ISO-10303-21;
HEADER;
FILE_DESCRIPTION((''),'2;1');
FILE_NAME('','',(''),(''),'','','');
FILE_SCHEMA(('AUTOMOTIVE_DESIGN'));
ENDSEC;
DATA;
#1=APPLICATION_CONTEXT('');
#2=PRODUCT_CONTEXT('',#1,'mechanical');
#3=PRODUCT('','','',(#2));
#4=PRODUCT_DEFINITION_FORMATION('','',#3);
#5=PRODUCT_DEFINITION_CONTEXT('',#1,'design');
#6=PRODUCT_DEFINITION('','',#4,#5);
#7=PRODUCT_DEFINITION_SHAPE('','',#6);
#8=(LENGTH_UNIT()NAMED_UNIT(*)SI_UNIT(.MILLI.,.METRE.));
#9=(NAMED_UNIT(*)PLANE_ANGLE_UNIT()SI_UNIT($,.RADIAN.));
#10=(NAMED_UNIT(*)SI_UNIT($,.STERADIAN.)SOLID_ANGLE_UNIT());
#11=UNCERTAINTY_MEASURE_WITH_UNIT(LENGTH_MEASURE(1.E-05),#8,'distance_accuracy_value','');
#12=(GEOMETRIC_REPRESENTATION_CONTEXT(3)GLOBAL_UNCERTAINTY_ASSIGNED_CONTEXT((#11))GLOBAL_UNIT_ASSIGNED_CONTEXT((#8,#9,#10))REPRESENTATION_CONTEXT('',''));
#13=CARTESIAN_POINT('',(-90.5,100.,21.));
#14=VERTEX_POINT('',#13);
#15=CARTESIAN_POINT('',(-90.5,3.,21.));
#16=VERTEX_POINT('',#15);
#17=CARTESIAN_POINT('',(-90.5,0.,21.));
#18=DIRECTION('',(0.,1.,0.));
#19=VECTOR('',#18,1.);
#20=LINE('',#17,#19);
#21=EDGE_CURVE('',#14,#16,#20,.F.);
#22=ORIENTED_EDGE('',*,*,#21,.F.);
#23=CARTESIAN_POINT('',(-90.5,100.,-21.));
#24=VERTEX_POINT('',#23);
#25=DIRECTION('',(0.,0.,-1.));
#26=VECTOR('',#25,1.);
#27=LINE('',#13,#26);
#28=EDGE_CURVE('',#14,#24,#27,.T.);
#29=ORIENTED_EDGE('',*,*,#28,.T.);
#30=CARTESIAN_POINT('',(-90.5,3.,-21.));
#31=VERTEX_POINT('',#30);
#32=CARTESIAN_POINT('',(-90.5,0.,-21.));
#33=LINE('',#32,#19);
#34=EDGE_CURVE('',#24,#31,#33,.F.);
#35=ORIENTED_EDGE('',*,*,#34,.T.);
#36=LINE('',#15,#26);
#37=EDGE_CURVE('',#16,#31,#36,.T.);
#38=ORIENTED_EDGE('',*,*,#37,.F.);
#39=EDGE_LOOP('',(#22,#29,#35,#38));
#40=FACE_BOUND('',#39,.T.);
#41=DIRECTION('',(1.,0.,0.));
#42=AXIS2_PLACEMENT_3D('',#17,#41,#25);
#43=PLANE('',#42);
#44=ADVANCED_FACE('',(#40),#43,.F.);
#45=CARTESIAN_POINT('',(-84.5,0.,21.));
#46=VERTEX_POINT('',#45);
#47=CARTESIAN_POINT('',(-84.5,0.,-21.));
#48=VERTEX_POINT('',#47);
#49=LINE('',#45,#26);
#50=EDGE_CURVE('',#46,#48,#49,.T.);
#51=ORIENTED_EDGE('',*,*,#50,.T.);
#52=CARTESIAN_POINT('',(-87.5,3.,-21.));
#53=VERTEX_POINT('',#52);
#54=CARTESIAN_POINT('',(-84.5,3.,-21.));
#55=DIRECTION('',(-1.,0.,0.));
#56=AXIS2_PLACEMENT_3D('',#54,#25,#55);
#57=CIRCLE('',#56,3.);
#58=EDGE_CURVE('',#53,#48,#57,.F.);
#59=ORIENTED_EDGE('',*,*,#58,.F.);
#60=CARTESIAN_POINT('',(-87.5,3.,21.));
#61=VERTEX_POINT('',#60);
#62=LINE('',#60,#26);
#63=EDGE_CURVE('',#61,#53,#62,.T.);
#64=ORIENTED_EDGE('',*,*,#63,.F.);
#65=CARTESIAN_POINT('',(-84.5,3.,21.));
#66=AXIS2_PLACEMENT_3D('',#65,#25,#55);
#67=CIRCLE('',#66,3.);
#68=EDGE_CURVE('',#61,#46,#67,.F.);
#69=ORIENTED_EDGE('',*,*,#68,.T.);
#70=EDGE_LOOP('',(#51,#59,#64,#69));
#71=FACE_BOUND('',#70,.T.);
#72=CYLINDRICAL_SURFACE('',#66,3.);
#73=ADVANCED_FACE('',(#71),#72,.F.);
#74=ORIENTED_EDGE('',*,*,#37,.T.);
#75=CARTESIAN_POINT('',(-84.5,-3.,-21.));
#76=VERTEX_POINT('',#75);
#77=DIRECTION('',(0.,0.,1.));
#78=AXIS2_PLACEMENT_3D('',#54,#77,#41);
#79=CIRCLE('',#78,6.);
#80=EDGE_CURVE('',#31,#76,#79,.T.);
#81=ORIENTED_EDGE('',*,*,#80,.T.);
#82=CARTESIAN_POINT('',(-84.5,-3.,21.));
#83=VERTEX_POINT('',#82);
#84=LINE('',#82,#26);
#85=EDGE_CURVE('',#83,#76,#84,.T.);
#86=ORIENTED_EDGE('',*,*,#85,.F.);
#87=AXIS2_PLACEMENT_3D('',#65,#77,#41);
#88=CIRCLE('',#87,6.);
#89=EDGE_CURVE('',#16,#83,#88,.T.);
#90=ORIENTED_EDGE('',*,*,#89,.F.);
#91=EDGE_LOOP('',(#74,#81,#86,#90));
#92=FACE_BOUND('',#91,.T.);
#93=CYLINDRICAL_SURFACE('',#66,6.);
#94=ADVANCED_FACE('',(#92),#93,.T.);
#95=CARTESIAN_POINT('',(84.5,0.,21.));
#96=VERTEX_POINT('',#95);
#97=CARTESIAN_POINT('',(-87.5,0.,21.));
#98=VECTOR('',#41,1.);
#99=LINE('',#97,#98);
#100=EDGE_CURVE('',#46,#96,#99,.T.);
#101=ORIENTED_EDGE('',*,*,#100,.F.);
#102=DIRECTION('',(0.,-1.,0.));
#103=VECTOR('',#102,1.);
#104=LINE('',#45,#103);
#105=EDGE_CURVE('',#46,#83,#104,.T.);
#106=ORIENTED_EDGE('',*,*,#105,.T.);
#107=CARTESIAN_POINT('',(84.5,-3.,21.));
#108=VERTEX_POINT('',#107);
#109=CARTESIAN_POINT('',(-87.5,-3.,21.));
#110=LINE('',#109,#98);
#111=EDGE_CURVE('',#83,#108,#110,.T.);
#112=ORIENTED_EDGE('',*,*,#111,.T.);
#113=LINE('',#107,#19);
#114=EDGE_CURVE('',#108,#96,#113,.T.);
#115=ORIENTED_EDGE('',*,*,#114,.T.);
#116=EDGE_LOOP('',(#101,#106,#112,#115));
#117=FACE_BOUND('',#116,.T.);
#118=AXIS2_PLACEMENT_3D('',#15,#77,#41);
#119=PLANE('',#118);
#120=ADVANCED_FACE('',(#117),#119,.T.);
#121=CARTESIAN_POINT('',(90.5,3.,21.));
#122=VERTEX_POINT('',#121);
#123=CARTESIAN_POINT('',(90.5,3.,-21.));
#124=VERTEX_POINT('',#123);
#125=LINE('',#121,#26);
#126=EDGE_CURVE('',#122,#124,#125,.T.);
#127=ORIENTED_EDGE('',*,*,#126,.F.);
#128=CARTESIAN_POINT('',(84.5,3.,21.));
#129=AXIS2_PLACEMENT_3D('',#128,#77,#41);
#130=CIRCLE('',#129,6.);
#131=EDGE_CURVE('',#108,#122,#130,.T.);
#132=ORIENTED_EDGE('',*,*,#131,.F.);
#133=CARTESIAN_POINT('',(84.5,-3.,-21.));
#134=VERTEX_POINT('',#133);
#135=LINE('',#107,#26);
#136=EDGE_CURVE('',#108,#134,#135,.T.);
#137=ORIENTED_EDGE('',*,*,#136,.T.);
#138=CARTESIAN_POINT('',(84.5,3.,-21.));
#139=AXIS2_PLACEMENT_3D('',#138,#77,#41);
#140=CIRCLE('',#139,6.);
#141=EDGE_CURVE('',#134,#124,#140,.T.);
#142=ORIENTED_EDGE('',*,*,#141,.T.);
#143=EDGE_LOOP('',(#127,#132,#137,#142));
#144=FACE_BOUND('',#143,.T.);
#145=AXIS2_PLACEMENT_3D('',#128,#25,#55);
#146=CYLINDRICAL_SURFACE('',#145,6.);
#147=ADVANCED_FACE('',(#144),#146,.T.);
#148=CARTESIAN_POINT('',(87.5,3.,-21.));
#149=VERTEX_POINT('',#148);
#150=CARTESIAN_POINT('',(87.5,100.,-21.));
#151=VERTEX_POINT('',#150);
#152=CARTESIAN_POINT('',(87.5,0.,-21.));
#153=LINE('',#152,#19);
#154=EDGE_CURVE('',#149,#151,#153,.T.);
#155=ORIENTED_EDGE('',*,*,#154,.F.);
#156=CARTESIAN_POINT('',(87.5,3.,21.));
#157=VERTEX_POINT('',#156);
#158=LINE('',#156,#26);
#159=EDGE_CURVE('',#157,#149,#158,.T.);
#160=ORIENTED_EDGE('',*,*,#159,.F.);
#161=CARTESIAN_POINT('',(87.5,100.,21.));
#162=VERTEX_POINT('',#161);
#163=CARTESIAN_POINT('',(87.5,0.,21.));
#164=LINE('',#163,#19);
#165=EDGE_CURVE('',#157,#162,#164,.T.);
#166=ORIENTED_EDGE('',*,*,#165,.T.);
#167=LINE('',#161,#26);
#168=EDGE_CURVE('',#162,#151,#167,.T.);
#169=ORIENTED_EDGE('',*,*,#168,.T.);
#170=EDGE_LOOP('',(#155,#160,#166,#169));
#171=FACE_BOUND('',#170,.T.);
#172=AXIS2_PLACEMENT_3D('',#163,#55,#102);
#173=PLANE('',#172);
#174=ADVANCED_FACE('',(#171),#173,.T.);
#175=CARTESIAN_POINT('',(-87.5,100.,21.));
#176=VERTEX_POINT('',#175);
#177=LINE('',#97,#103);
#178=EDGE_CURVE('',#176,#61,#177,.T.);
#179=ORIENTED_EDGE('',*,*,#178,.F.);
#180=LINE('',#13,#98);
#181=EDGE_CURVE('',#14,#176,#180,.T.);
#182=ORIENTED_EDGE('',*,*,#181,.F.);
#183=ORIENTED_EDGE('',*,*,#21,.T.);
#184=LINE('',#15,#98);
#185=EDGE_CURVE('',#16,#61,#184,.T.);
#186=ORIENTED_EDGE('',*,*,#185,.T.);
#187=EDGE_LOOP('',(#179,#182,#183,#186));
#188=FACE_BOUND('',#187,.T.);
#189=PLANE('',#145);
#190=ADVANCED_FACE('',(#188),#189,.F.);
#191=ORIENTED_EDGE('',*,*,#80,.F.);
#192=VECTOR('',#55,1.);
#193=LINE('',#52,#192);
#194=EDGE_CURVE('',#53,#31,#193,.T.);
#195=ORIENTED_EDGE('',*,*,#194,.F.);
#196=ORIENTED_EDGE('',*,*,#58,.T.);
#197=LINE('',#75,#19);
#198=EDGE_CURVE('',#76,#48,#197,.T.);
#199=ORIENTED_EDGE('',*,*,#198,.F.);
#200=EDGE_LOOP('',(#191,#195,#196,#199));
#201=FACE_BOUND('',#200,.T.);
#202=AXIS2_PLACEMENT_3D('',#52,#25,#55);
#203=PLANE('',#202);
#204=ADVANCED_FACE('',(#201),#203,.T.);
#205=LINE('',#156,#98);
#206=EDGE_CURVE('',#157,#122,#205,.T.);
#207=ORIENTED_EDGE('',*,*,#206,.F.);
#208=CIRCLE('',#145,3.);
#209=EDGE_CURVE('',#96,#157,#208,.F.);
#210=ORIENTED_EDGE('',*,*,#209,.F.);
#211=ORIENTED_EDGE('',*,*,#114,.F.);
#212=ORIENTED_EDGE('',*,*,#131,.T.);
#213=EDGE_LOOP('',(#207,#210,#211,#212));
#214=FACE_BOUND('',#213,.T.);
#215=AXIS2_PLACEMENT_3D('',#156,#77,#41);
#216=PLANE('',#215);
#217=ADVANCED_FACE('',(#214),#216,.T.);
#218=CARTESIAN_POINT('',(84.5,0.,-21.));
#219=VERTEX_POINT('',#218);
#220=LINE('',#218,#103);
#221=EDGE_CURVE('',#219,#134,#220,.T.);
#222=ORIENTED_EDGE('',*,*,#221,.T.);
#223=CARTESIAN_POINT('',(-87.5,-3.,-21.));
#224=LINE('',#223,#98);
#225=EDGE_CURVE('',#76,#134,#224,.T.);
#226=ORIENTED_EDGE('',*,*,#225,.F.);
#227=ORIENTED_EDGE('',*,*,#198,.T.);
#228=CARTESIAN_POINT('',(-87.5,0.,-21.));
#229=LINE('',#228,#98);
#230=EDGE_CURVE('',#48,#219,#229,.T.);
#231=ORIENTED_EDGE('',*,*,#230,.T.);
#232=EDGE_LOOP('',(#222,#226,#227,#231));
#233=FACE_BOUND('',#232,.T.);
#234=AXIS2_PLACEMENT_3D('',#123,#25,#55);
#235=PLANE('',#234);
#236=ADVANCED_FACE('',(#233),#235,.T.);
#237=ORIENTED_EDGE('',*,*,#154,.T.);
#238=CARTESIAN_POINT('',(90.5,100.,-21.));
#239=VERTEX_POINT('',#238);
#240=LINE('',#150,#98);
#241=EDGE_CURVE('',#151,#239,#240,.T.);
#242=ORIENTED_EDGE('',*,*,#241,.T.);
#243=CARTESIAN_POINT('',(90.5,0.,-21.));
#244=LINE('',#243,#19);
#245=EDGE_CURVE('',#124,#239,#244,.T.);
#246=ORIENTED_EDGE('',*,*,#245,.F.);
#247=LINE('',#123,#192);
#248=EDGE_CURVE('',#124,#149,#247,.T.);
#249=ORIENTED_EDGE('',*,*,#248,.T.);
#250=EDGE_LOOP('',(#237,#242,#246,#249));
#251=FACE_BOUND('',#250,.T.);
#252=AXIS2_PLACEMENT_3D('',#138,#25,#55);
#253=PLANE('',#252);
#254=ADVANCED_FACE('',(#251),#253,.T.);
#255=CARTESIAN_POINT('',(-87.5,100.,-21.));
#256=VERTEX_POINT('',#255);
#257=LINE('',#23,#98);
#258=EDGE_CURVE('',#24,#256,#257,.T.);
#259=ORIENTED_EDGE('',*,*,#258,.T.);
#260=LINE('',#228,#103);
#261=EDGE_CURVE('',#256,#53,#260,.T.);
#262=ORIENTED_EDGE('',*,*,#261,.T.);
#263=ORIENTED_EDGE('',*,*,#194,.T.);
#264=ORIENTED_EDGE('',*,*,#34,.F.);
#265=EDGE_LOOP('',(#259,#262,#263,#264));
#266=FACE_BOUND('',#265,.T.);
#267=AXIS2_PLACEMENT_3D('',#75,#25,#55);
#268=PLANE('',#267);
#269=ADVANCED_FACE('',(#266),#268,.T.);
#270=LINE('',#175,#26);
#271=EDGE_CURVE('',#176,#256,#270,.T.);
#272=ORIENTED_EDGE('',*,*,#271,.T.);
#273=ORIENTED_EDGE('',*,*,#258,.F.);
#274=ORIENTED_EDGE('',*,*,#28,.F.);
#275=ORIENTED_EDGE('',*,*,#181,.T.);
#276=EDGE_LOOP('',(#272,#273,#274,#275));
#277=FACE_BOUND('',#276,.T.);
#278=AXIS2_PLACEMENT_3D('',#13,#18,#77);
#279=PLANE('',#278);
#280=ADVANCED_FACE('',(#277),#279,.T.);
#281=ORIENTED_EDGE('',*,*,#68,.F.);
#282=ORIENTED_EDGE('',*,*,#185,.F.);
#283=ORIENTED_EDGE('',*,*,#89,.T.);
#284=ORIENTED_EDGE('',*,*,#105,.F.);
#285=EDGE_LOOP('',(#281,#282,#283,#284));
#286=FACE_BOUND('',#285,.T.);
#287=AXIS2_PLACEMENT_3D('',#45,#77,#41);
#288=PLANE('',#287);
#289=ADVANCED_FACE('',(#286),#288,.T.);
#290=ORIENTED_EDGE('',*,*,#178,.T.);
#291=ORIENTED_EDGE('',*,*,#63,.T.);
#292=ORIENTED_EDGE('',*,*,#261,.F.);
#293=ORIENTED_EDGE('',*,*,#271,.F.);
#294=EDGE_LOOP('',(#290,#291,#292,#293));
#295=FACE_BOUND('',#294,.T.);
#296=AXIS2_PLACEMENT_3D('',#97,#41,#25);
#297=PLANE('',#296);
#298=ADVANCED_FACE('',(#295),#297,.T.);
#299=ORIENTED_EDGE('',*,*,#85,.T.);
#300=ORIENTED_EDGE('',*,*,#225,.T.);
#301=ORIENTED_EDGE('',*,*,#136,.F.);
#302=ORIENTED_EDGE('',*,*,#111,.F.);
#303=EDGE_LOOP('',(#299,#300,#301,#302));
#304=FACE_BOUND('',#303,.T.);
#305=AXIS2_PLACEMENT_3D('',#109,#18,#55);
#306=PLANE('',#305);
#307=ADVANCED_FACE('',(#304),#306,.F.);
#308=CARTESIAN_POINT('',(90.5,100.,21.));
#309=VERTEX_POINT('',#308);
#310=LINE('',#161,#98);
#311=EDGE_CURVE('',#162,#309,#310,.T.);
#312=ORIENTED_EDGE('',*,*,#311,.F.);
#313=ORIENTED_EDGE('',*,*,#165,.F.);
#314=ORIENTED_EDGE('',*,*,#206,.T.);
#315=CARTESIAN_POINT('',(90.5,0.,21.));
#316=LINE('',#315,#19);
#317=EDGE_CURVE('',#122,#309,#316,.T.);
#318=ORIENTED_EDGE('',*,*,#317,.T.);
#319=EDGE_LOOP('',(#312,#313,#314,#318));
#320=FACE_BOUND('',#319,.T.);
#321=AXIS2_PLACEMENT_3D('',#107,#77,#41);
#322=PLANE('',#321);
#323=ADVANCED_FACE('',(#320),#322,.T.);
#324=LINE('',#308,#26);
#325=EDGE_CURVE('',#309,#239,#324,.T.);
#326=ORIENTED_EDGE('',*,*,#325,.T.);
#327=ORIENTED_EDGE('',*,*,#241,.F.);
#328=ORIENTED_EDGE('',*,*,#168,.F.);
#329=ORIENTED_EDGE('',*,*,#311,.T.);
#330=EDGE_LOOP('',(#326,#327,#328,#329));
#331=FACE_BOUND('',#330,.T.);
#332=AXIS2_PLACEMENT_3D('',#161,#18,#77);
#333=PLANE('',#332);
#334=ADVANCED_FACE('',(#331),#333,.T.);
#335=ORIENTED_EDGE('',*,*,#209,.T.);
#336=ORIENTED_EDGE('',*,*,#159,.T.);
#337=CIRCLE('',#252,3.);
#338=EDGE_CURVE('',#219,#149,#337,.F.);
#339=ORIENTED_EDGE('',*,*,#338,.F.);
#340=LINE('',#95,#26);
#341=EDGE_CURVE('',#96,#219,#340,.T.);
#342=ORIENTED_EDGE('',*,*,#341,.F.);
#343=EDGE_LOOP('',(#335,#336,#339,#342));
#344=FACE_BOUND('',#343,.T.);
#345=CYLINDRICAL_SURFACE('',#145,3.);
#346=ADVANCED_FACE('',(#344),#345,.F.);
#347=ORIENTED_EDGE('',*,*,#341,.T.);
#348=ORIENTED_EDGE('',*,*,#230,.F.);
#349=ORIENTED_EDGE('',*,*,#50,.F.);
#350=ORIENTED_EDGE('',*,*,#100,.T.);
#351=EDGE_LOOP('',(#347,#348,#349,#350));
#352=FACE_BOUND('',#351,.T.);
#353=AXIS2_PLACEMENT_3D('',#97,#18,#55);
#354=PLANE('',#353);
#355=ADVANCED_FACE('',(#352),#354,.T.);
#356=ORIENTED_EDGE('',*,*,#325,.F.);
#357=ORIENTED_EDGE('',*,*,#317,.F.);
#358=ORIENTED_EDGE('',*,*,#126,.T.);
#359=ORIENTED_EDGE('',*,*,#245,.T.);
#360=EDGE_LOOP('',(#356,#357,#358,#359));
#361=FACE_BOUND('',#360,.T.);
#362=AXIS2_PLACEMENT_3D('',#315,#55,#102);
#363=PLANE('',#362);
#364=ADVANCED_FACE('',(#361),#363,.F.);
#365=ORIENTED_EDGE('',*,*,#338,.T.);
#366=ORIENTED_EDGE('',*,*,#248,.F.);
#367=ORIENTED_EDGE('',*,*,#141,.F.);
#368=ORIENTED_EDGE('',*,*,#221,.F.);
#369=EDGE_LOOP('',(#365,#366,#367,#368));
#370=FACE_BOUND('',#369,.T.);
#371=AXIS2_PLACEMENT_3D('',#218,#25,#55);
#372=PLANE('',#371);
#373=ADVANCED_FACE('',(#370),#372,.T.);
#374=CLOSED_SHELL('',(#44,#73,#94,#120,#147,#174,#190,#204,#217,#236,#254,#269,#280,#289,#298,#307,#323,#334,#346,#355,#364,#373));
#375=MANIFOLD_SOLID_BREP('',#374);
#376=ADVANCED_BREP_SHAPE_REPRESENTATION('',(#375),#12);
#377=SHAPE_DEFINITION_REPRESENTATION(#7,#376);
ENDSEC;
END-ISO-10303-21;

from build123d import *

# Parameters (mm, degrees)
BASE_FLANGE1_DEPTH = 21


# Sheet-metal steps are written as plain solids
with BuildPart() as part:
    # Sketch1 → Base-Flange1 (new, symmetric)
    with BuildSketch(Plane.XY):
        with BuildLine():
            Line((-87.5, 100), (-87.5, 3))
            ThreePointArc((-87.5, 3), (-86.621320344, 0.878679656), (-84.5, 0))
            Line((-84.5, 0), (84.5, 0))
            ThreePointArc((84.5, 0), (86.621320344, 0.878679656), (87.5, 3))
            Line((87.5, 3), (87.5, 100))
            Line((87.5, 100), (90.5, 100))
            Line((90.5, 100), (90.5, 3))
            ThreePointArc((90.5, 3), (88.742640687, -1.242640687), (84.5, -3))
            Line((84.5, -3), (-84.5, -3))
            ThreePointArc((-84.5, -3), (-88.742640687, -1.242640687), (-90.5, 3))
            Line((-90.5, 3), (-90.5, 100))
            Line((-90.5, 100), (-87.5, 100))
        make_face()
    extrude(amount=BASE_FLANGE1_DEPTH, both=True)


solid = part.part
